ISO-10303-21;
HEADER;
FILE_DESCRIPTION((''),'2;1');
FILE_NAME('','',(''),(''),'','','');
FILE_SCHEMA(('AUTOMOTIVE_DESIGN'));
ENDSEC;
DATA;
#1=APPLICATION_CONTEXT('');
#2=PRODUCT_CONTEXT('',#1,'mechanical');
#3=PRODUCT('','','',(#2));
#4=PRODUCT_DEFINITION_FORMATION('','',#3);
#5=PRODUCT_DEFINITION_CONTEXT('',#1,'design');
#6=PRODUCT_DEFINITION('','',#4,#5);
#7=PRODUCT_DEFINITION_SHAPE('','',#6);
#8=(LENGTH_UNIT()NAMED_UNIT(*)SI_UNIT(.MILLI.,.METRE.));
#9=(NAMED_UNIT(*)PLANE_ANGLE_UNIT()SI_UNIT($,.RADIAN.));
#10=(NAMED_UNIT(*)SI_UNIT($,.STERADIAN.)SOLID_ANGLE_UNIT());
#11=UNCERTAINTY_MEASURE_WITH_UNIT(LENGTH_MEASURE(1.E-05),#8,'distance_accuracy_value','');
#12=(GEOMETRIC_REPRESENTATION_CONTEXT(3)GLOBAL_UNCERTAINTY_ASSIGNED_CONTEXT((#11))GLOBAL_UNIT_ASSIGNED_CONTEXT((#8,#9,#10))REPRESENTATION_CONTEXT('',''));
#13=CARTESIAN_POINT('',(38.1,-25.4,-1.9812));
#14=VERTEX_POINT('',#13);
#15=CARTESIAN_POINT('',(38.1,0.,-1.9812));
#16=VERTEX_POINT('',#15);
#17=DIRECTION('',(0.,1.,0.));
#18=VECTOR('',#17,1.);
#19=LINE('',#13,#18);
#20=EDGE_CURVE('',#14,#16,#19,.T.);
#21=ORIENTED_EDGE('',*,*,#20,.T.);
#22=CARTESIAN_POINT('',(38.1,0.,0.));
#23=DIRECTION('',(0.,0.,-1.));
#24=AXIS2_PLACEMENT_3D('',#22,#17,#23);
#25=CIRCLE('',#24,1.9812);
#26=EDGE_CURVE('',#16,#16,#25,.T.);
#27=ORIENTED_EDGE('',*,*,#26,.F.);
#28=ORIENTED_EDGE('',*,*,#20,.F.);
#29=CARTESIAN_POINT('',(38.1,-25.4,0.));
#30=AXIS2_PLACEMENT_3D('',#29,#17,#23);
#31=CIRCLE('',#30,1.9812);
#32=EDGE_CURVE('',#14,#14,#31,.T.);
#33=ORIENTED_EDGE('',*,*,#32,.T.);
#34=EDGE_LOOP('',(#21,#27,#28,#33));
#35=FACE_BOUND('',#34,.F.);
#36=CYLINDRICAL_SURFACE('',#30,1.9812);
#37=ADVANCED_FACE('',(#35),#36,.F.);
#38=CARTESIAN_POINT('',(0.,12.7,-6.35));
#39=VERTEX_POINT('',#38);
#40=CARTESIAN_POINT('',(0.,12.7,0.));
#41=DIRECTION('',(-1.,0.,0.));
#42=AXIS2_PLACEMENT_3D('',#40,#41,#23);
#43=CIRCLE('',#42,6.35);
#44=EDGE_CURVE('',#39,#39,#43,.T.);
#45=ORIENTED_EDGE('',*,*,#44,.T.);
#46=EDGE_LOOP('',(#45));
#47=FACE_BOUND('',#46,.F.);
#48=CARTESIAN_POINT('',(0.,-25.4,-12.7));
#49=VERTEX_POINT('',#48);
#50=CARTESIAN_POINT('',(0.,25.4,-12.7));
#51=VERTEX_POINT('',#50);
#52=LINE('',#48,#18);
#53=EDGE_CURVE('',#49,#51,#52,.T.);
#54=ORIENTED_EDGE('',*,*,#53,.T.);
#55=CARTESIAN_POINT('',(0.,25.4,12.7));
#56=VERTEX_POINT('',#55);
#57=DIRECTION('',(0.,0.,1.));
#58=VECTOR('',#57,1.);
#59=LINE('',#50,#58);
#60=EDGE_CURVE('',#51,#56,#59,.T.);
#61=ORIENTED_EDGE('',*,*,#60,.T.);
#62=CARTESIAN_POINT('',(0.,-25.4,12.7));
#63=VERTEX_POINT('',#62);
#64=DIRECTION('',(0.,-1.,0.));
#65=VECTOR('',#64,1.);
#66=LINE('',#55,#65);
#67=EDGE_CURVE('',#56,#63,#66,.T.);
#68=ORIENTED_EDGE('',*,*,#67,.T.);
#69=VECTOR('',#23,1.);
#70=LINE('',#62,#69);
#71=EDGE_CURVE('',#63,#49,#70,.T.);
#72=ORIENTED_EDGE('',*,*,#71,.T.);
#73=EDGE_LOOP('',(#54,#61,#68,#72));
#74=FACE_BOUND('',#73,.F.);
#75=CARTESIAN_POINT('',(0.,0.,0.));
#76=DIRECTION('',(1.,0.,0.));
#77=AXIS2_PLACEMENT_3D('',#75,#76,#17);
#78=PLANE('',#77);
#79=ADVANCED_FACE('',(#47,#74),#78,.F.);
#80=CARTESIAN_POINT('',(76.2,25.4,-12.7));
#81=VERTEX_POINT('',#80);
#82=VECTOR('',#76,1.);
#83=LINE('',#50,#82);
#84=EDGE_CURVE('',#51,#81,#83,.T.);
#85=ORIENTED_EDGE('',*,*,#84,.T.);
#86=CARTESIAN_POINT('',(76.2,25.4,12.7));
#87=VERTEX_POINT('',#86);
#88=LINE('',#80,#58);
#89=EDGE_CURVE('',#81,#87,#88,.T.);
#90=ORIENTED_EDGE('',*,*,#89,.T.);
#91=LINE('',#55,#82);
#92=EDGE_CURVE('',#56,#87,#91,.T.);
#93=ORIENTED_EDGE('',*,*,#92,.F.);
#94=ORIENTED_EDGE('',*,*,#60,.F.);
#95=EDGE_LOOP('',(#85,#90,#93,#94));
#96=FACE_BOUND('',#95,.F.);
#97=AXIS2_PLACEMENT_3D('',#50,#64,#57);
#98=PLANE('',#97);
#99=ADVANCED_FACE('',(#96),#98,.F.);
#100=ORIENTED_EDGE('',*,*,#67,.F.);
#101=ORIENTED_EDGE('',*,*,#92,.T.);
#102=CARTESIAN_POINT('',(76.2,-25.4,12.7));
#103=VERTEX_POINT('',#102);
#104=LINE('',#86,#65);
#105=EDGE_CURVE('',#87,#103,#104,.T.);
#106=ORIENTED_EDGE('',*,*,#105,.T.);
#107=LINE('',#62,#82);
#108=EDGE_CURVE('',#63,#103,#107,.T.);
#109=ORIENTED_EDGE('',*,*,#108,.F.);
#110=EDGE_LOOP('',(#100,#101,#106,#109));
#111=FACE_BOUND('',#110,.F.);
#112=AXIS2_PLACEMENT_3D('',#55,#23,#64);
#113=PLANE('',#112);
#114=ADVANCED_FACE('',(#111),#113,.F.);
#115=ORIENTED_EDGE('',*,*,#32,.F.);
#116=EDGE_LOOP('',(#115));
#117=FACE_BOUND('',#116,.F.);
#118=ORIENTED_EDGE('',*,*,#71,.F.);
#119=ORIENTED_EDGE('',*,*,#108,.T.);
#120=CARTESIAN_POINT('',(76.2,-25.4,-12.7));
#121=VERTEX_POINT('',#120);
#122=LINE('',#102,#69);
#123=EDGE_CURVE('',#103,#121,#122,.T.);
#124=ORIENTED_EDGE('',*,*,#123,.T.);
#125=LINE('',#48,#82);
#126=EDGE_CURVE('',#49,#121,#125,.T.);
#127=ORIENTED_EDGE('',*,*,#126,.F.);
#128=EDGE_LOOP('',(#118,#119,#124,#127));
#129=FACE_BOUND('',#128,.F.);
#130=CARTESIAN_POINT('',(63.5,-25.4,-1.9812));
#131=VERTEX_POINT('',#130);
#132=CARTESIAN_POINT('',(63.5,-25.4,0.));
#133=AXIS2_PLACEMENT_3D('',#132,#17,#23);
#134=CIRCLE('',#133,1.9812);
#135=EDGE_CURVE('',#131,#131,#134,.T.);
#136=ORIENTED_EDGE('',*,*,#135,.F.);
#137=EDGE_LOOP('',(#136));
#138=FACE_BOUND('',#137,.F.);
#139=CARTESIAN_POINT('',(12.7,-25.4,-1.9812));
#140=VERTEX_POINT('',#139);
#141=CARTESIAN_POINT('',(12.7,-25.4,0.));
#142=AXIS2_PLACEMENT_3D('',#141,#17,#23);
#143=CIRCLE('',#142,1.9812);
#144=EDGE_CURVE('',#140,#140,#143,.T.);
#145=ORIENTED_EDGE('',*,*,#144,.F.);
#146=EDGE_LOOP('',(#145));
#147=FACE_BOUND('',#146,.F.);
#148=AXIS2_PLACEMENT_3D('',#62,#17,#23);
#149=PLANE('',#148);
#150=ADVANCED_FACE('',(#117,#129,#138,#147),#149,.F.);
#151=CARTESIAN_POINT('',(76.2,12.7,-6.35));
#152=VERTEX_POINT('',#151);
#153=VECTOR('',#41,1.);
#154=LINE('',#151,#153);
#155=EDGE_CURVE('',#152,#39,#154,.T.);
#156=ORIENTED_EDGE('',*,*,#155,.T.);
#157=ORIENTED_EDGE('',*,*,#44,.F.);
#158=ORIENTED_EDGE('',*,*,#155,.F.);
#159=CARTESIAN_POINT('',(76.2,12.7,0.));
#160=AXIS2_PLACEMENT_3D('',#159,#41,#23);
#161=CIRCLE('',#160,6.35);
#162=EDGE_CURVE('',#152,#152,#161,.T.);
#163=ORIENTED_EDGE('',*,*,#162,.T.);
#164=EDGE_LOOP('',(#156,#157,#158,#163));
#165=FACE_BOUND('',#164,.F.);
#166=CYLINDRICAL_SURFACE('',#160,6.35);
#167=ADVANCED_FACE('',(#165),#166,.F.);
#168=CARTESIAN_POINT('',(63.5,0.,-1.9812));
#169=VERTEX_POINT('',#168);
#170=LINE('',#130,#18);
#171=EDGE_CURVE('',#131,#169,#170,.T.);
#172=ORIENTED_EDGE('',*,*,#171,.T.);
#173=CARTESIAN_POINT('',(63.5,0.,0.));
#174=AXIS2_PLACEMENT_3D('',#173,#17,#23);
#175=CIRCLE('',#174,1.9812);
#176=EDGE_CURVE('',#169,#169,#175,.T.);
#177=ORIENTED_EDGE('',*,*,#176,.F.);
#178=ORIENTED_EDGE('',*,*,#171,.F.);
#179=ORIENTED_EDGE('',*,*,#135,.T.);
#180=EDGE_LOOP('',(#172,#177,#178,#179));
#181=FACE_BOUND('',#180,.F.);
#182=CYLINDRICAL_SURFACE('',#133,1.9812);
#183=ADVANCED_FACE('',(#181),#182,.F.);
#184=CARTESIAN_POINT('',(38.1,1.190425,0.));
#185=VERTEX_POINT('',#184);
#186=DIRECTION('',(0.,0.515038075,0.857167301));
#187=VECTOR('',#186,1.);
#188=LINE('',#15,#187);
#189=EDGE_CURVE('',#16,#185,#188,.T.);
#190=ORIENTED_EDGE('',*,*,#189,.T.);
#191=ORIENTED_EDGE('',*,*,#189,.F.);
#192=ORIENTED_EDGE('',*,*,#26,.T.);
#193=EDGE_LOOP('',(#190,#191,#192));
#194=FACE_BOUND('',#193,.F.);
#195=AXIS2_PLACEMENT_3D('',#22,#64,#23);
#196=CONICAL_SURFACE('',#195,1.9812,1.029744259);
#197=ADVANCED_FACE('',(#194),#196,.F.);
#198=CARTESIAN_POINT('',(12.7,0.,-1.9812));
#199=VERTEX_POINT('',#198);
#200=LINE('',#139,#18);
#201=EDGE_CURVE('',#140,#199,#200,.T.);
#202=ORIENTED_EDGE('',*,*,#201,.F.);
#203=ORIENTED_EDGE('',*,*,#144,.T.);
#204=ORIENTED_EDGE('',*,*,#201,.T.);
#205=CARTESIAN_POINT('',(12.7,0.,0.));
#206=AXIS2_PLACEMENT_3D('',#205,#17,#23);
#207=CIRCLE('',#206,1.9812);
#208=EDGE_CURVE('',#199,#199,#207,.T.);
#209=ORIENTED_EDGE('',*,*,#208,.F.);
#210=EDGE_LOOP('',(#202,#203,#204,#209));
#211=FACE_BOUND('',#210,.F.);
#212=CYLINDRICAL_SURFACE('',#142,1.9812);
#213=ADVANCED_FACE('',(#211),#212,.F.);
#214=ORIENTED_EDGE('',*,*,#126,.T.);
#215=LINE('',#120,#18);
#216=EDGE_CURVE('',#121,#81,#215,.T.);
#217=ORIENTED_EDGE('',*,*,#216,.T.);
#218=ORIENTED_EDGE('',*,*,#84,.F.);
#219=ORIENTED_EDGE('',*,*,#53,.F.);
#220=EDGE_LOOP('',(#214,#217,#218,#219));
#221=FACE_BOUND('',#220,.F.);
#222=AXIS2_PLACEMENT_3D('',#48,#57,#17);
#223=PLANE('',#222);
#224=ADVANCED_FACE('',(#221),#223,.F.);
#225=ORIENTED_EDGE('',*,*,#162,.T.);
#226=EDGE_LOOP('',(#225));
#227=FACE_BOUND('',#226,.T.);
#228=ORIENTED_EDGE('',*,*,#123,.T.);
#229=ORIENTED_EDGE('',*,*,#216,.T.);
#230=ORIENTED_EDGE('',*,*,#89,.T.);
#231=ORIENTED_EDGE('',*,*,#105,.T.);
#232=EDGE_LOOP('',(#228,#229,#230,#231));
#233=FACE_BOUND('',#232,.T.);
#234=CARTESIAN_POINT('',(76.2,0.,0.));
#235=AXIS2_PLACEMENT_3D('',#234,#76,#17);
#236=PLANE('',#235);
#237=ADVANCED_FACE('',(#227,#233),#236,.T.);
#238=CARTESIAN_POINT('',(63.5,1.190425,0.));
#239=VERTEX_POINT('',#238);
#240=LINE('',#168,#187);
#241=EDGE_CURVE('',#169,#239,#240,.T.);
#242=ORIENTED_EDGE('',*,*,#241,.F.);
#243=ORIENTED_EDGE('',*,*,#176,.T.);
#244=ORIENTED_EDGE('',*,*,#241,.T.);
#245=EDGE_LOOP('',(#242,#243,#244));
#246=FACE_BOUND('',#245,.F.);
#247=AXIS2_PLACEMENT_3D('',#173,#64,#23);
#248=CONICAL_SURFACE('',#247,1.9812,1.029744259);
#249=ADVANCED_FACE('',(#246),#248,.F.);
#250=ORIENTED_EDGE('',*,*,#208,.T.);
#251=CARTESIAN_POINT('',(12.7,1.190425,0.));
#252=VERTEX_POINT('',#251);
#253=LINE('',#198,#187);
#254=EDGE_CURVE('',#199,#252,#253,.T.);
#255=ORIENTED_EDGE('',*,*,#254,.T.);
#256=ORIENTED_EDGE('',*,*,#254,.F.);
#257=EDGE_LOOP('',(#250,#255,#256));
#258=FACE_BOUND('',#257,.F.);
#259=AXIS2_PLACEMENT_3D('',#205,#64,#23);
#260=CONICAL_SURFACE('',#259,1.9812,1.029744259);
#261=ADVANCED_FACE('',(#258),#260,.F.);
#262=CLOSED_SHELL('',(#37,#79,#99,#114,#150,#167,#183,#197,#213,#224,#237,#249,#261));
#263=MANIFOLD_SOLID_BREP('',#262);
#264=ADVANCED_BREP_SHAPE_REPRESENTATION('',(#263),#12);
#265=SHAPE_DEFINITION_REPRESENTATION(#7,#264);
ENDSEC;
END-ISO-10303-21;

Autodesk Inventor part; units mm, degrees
ref_plane "YZ Plane" through (0, 0, 0) normal (1, 0, 0) x (0, 1, 0)
ref_plane "XZ Plane" through (0, 0, 0) normal (0, 1, 0) x (-1, 0, 0)
ref_plane "XY Plane" through (0, 0, 0) normal (0, 0, 1) x (1, 0, 0)
sketch "Sketch1" plane through (0, 0, 0) normal (1, 0, 0) x (0, 1, 0)
  line L0 (25.4, 12.7) -> (-25.4, 12.7)
  line L1 (-25.4, 12.7) -> (-25.4, -12.7)
  line L2 (-25.4, -12.7) -> (25.4, -12.7)
  line L3 (25.4, -12.7) -> (25.4, 12.7)
  line L4 (25.4, 12.7) -> (-25.4, -12.7) construction
  line L5 (-25.4, 12.7) -> (25.4, -12.7) construction
  point P0 (0, 0)
  dimension "d0" = 50.8
  dimension "d1" = 25.4
extrude "Extrusion1" add sketch "Sketch1" along normal blind 76.2
sketch "Sketch2" plane through (76.2, 0, 0) normal (1, 0, 0) x (0, 0, -1)
  line L0 (12.7, 25.4) -> (-12.7, 25.4) construction
  point P0 (0, 0)
  point P1 (0, 12.7)
  dimension "d4" = 12.7
hole "Hole1" at (76.2, 12.7, 0) direction (-1, 0, 0) diameter 12.7 end through all
sketch "Sketch3" plane through (0, -25.4, -12.7) normal (0, -1, 0) x (1, 0, 0)
  line L0 (0, 0) -> (76.2, 0) construction
  line L1 (63.5, 12.7) -> (12.7, 12.7) construction
  line L2 (76.2, 25.4) -> (76.2, 0) construction
  point P0 (0, 12.7)
  point P1 (38.1, 12.7)
  point P2 (38.1, 0)
  point P3 (38.1, 12.7)
  point P4 (76.2, 12.7)
  dimension "d12" = 50.8
hole "Hole2" at (63.5, -25.4, 0) at (38.1, -25.4, 0) at (12.7, -25.4, 0) direction (0, 1, 0) diameter 3.9624 depth 25.4 tip angle 118 thread size "10-32 UNF" class "2B" standard "ANSI Unified Screw Threads"
properties part number "CHD-001" material "Aluminum 6061"
